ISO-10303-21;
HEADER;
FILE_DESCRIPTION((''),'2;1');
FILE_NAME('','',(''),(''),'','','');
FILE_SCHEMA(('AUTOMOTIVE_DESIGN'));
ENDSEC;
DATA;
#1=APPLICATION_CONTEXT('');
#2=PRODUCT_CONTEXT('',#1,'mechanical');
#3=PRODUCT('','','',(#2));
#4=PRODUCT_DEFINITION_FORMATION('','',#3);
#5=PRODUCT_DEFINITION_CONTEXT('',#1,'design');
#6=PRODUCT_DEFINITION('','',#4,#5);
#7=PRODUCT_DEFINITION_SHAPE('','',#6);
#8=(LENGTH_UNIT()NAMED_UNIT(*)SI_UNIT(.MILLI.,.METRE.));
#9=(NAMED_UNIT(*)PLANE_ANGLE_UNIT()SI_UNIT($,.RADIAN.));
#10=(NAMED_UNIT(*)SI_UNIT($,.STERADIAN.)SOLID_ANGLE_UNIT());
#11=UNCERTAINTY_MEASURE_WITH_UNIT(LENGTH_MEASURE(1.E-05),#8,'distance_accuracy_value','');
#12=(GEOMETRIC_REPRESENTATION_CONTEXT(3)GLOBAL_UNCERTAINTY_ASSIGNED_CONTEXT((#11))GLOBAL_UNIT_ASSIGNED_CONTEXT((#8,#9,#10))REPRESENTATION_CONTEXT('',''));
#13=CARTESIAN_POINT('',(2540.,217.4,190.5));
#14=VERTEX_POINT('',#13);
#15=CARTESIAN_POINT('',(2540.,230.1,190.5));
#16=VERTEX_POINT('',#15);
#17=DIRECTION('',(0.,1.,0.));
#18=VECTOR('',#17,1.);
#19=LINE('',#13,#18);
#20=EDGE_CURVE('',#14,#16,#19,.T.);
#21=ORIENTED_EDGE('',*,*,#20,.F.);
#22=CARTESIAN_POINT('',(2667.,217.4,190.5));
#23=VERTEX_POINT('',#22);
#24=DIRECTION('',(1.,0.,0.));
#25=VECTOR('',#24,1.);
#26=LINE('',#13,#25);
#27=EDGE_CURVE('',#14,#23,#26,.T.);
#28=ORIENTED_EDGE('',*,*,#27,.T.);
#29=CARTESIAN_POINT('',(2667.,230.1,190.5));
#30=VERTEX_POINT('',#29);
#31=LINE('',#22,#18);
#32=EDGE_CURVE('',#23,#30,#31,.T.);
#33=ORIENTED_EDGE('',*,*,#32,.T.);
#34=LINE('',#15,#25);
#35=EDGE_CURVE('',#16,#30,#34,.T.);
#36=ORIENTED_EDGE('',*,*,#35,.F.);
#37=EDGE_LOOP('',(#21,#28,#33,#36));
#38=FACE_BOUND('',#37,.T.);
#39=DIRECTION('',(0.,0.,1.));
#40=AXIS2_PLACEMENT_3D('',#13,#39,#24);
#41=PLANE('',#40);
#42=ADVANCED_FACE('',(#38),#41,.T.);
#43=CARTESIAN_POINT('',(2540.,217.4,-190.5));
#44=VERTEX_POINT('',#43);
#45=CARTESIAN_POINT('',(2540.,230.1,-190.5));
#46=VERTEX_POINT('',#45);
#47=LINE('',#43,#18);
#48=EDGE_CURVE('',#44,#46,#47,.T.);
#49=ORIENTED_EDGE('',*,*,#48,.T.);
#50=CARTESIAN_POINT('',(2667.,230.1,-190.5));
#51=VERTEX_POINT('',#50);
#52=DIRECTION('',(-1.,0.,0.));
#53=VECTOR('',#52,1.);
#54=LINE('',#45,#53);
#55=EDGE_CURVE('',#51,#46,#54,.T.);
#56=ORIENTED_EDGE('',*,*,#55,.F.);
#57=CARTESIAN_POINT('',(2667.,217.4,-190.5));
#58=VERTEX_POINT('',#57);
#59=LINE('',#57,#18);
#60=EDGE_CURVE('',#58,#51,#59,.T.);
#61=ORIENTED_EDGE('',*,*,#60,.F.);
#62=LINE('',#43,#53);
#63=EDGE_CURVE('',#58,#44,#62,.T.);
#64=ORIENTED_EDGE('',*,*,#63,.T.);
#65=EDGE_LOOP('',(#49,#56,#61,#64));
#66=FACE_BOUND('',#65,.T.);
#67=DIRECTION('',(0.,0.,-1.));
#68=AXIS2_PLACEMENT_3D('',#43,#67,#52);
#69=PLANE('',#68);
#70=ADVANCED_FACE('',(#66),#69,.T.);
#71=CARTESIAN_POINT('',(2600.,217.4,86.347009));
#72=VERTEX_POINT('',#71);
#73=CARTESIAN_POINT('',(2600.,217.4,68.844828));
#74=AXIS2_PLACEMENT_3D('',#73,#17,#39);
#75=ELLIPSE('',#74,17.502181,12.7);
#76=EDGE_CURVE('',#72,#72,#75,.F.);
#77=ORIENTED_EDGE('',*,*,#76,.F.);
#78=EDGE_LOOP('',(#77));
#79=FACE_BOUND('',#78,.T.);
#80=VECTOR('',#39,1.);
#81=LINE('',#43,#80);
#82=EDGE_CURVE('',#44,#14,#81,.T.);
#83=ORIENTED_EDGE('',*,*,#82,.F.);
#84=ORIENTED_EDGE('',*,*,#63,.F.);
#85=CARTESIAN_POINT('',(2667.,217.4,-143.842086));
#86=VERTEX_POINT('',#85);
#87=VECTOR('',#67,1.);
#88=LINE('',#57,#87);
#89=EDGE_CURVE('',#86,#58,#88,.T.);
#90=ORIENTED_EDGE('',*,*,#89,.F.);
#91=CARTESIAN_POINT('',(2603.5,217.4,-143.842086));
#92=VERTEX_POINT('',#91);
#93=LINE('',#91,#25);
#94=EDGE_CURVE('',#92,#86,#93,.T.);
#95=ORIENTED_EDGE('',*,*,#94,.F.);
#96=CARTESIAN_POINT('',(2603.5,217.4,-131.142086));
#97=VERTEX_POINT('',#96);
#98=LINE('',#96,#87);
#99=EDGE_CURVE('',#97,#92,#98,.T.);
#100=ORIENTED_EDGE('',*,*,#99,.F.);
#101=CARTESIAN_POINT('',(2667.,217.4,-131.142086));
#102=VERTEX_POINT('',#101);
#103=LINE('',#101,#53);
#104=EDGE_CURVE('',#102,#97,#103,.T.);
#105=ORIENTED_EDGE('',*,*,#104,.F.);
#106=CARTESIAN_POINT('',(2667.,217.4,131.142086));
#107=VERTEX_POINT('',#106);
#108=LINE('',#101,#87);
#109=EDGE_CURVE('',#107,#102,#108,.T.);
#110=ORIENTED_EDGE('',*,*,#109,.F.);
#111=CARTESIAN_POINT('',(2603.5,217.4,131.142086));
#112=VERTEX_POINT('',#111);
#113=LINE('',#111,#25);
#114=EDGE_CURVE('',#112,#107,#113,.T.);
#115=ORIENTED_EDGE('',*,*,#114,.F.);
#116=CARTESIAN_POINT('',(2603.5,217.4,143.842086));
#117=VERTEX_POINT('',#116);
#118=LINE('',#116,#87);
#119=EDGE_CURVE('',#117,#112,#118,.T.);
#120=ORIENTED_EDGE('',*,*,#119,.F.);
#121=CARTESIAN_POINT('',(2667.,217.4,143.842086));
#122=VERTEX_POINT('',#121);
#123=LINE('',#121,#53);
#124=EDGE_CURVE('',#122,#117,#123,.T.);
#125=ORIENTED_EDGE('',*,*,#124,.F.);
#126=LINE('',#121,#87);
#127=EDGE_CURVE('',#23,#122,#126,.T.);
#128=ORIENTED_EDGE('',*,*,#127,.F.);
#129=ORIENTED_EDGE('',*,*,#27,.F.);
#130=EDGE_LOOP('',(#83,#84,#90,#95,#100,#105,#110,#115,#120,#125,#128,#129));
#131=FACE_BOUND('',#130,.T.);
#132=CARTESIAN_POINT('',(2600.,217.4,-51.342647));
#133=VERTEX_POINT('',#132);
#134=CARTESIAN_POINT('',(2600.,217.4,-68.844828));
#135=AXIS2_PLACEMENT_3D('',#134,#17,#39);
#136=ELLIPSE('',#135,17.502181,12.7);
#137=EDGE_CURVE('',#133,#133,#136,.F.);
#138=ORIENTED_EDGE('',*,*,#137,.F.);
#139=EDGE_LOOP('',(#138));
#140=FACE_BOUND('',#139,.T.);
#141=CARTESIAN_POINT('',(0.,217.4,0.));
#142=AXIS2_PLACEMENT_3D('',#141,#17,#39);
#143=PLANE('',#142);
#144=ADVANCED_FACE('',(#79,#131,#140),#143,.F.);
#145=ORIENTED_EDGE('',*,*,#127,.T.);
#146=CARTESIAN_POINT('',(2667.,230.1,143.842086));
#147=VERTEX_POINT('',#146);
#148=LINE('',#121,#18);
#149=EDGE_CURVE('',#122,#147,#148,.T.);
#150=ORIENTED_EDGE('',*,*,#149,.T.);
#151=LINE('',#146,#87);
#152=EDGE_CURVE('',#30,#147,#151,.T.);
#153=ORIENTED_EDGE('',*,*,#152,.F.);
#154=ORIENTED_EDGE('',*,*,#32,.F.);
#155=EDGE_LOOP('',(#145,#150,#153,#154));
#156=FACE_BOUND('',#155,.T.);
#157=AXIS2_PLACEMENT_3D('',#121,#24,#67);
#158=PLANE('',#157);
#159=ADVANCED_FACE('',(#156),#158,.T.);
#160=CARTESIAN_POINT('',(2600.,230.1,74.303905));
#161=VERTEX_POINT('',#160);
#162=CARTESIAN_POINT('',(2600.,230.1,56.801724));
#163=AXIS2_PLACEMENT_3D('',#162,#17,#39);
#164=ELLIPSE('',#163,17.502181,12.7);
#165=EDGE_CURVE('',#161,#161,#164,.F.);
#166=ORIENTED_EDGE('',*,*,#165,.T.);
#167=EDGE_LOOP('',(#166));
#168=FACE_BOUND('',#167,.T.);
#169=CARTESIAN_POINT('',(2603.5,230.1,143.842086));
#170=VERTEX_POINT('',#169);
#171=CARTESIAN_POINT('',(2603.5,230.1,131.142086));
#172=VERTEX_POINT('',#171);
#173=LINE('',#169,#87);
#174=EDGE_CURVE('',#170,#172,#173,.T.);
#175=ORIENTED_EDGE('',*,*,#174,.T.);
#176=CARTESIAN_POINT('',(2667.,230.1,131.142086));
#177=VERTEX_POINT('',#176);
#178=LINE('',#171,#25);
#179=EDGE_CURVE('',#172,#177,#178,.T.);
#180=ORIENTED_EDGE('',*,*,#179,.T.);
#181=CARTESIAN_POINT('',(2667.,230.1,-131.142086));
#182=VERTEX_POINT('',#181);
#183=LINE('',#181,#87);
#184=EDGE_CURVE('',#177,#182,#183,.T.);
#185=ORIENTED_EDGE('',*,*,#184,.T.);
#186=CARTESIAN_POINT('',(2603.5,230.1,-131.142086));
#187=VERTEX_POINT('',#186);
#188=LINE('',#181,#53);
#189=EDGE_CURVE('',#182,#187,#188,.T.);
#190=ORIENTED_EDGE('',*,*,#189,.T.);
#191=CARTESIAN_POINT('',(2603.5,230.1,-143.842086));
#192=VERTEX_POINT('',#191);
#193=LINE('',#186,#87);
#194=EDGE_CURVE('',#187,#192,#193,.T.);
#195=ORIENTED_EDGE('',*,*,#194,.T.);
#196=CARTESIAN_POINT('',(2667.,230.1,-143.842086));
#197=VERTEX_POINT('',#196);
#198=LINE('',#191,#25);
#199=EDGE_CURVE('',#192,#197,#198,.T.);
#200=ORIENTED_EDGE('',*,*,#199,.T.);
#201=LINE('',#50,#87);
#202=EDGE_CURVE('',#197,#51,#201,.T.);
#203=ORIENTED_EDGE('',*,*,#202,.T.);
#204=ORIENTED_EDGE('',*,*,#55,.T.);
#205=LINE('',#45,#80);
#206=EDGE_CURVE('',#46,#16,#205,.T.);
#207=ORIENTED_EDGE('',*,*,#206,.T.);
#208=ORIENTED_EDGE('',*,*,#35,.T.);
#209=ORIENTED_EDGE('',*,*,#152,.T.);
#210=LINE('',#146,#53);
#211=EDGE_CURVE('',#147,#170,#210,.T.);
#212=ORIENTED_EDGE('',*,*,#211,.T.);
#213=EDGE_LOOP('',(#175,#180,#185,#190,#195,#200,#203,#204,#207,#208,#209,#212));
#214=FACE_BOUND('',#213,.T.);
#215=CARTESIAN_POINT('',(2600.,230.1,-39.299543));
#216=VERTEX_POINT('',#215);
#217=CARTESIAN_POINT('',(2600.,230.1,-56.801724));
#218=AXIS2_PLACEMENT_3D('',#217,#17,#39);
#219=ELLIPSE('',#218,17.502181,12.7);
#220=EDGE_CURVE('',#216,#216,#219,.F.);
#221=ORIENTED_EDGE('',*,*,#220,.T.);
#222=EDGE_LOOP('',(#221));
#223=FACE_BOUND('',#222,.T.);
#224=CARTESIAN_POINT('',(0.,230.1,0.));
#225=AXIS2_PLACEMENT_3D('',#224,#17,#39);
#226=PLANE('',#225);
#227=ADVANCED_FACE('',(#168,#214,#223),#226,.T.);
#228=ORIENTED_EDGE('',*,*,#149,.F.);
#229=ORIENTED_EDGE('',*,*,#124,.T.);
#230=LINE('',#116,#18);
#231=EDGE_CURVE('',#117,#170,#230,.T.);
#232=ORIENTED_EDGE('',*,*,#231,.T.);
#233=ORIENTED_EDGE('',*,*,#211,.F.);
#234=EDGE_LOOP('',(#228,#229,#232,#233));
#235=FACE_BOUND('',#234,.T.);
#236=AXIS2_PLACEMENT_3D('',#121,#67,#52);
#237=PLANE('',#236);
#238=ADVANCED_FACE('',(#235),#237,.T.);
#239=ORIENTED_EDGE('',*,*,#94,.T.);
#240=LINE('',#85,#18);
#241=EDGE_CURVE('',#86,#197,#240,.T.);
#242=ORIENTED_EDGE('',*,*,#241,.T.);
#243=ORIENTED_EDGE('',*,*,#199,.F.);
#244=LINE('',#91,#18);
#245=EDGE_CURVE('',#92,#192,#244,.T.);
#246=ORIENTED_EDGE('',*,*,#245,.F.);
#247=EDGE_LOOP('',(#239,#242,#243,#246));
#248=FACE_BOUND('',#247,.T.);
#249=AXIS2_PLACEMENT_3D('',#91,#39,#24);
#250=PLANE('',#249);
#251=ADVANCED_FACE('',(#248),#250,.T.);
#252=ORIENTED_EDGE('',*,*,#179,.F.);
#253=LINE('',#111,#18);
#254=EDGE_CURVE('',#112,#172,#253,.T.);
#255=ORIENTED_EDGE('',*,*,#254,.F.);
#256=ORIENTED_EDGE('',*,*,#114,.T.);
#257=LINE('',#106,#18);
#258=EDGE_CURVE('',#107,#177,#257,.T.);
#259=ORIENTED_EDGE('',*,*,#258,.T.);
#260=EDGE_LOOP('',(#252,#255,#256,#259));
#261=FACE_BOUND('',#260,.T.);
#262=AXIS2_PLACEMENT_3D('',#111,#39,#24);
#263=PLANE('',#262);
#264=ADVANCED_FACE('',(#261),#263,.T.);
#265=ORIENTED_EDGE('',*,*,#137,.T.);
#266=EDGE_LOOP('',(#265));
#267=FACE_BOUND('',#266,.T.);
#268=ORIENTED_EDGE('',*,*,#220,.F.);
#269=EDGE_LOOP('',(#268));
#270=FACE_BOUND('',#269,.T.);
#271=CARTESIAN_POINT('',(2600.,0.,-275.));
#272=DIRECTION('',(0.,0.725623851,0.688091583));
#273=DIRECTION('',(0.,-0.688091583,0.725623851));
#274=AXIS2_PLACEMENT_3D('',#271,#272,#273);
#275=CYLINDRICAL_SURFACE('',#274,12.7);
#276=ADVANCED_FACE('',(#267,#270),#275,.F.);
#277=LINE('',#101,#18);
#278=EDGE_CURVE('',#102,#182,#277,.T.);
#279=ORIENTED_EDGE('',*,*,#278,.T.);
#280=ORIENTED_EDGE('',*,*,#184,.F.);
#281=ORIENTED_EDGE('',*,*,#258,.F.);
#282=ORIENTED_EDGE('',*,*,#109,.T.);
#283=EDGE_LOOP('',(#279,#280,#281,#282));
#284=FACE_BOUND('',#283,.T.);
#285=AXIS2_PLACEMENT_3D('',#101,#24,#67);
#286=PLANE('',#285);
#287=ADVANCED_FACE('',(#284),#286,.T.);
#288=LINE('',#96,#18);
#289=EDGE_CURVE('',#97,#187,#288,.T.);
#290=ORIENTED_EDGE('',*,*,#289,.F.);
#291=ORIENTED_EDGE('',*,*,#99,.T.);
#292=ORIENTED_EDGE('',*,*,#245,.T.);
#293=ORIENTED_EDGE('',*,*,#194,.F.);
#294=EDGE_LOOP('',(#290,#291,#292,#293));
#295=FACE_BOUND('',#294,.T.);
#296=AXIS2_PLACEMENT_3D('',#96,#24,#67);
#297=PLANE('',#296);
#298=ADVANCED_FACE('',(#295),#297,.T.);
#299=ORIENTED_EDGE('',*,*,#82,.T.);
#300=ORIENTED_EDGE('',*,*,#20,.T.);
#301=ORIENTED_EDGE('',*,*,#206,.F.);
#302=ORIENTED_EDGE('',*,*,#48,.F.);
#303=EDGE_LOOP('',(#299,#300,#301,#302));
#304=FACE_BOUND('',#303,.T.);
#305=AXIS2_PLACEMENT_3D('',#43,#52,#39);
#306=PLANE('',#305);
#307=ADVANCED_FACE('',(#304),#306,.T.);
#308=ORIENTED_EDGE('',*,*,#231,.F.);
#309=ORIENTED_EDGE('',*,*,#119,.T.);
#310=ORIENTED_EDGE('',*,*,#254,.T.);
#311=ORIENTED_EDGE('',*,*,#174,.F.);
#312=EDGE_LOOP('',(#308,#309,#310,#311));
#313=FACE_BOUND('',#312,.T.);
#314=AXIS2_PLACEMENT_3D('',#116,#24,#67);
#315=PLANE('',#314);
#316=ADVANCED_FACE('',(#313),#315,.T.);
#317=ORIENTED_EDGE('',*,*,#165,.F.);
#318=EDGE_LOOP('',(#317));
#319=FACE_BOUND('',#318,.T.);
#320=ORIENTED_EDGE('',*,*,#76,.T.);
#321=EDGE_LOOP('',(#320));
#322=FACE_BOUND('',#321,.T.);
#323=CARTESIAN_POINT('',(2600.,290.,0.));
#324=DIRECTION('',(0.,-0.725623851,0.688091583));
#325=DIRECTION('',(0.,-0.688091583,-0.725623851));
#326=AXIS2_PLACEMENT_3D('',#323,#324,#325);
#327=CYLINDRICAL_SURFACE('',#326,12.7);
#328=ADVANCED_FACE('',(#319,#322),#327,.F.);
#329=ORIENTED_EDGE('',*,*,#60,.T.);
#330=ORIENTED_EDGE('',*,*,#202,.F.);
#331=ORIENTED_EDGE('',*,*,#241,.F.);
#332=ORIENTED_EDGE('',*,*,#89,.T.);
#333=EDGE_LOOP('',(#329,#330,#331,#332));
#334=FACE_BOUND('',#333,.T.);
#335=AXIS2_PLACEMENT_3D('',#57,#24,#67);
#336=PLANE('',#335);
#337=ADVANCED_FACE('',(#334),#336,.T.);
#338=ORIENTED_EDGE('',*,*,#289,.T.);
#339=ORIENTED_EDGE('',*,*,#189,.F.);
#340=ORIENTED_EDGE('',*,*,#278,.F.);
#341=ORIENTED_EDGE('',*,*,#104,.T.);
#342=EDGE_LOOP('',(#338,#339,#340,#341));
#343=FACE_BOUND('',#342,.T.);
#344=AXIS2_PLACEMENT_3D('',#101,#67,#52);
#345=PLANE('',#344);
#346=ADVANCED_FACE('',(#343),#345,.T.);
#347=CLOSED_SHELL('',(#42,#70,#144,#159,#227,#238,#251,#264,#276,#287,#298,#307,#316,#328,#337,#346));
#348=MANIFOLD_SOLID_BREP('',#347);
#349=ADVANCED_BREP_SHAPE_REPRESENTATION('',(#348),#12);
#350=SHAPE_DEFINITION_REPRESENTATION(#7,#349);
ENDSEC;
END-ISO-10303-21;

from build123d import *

# Parameters (mm, degrees)
BOSS_EXTRUDE1_DEPTH = 12.7
CAVITY1_START       = 98.335975301
CAVITY1_OUTLINE_R   = 12.7
CAVITY1_DEPTH       = 41.588388123
CAVITY1_2_OUTLINE_R = 12.7
CAVITY1_2_DEPTH     = 41.588388123


# Read off the part's stored shape, not the designer's step: Cavity1
with BuildPart() as part:
    # Sketch2 → Boss-Extrude1 (new body)
    with BuildSketch(Plane(origin=(0, 230.1, 0), x_dir=(1, 0, 0), z_dir=(0, 1, 0))):
        Polygon((2540, 190.5), (2667, 190.5), (2667, 143.842086105), (2603.5, 143.842086105), (2603.5, 131.142086105), (2667, 131.142086105), (2667, -131.142086105), (2603.5, -131.142086105), (2603.5, -143.842086105), (2667, -143.842086105), (2667, -190.5), (2540, -190.5), align=None)
    extrude(amount=-BOSS_EXTRUDE1_DEPTH)

    # Cavity1 outline → Cavity1 (cut)
    with BuildSketch(Plane(origin=(0, 0, 0), x_dir=(1, 0, 0), z_dir=(0, 0.7256238511734343, -0.6880915830092923)).offset(CAVITY1_START)):
        with Locations((2600, -199.546559073)):
            Circle(CAVITY1_OUTLINE_R)
    extrude(amount=CAVITY1_DEPTH, mode=Mode.SUBTRACT)

    # Cavity1 2 outline → Cavity1 2 (cut)
    with BuildSketch(Plane(origin=(0, 0, 0), x_dir=(1, 0, 0), z_dir=(0, 0.7256238511734294, 0.6880915830092974)).offset(CAVITY1_START)):
        with Locations((2600, 199.546559073)):
            Circle(CAVITY1_2_OUTLINE_R)
    extrude(amount=CAVITY1_2_DEPTH, mode=Mode.SUBTRACT)


solid = part.part
